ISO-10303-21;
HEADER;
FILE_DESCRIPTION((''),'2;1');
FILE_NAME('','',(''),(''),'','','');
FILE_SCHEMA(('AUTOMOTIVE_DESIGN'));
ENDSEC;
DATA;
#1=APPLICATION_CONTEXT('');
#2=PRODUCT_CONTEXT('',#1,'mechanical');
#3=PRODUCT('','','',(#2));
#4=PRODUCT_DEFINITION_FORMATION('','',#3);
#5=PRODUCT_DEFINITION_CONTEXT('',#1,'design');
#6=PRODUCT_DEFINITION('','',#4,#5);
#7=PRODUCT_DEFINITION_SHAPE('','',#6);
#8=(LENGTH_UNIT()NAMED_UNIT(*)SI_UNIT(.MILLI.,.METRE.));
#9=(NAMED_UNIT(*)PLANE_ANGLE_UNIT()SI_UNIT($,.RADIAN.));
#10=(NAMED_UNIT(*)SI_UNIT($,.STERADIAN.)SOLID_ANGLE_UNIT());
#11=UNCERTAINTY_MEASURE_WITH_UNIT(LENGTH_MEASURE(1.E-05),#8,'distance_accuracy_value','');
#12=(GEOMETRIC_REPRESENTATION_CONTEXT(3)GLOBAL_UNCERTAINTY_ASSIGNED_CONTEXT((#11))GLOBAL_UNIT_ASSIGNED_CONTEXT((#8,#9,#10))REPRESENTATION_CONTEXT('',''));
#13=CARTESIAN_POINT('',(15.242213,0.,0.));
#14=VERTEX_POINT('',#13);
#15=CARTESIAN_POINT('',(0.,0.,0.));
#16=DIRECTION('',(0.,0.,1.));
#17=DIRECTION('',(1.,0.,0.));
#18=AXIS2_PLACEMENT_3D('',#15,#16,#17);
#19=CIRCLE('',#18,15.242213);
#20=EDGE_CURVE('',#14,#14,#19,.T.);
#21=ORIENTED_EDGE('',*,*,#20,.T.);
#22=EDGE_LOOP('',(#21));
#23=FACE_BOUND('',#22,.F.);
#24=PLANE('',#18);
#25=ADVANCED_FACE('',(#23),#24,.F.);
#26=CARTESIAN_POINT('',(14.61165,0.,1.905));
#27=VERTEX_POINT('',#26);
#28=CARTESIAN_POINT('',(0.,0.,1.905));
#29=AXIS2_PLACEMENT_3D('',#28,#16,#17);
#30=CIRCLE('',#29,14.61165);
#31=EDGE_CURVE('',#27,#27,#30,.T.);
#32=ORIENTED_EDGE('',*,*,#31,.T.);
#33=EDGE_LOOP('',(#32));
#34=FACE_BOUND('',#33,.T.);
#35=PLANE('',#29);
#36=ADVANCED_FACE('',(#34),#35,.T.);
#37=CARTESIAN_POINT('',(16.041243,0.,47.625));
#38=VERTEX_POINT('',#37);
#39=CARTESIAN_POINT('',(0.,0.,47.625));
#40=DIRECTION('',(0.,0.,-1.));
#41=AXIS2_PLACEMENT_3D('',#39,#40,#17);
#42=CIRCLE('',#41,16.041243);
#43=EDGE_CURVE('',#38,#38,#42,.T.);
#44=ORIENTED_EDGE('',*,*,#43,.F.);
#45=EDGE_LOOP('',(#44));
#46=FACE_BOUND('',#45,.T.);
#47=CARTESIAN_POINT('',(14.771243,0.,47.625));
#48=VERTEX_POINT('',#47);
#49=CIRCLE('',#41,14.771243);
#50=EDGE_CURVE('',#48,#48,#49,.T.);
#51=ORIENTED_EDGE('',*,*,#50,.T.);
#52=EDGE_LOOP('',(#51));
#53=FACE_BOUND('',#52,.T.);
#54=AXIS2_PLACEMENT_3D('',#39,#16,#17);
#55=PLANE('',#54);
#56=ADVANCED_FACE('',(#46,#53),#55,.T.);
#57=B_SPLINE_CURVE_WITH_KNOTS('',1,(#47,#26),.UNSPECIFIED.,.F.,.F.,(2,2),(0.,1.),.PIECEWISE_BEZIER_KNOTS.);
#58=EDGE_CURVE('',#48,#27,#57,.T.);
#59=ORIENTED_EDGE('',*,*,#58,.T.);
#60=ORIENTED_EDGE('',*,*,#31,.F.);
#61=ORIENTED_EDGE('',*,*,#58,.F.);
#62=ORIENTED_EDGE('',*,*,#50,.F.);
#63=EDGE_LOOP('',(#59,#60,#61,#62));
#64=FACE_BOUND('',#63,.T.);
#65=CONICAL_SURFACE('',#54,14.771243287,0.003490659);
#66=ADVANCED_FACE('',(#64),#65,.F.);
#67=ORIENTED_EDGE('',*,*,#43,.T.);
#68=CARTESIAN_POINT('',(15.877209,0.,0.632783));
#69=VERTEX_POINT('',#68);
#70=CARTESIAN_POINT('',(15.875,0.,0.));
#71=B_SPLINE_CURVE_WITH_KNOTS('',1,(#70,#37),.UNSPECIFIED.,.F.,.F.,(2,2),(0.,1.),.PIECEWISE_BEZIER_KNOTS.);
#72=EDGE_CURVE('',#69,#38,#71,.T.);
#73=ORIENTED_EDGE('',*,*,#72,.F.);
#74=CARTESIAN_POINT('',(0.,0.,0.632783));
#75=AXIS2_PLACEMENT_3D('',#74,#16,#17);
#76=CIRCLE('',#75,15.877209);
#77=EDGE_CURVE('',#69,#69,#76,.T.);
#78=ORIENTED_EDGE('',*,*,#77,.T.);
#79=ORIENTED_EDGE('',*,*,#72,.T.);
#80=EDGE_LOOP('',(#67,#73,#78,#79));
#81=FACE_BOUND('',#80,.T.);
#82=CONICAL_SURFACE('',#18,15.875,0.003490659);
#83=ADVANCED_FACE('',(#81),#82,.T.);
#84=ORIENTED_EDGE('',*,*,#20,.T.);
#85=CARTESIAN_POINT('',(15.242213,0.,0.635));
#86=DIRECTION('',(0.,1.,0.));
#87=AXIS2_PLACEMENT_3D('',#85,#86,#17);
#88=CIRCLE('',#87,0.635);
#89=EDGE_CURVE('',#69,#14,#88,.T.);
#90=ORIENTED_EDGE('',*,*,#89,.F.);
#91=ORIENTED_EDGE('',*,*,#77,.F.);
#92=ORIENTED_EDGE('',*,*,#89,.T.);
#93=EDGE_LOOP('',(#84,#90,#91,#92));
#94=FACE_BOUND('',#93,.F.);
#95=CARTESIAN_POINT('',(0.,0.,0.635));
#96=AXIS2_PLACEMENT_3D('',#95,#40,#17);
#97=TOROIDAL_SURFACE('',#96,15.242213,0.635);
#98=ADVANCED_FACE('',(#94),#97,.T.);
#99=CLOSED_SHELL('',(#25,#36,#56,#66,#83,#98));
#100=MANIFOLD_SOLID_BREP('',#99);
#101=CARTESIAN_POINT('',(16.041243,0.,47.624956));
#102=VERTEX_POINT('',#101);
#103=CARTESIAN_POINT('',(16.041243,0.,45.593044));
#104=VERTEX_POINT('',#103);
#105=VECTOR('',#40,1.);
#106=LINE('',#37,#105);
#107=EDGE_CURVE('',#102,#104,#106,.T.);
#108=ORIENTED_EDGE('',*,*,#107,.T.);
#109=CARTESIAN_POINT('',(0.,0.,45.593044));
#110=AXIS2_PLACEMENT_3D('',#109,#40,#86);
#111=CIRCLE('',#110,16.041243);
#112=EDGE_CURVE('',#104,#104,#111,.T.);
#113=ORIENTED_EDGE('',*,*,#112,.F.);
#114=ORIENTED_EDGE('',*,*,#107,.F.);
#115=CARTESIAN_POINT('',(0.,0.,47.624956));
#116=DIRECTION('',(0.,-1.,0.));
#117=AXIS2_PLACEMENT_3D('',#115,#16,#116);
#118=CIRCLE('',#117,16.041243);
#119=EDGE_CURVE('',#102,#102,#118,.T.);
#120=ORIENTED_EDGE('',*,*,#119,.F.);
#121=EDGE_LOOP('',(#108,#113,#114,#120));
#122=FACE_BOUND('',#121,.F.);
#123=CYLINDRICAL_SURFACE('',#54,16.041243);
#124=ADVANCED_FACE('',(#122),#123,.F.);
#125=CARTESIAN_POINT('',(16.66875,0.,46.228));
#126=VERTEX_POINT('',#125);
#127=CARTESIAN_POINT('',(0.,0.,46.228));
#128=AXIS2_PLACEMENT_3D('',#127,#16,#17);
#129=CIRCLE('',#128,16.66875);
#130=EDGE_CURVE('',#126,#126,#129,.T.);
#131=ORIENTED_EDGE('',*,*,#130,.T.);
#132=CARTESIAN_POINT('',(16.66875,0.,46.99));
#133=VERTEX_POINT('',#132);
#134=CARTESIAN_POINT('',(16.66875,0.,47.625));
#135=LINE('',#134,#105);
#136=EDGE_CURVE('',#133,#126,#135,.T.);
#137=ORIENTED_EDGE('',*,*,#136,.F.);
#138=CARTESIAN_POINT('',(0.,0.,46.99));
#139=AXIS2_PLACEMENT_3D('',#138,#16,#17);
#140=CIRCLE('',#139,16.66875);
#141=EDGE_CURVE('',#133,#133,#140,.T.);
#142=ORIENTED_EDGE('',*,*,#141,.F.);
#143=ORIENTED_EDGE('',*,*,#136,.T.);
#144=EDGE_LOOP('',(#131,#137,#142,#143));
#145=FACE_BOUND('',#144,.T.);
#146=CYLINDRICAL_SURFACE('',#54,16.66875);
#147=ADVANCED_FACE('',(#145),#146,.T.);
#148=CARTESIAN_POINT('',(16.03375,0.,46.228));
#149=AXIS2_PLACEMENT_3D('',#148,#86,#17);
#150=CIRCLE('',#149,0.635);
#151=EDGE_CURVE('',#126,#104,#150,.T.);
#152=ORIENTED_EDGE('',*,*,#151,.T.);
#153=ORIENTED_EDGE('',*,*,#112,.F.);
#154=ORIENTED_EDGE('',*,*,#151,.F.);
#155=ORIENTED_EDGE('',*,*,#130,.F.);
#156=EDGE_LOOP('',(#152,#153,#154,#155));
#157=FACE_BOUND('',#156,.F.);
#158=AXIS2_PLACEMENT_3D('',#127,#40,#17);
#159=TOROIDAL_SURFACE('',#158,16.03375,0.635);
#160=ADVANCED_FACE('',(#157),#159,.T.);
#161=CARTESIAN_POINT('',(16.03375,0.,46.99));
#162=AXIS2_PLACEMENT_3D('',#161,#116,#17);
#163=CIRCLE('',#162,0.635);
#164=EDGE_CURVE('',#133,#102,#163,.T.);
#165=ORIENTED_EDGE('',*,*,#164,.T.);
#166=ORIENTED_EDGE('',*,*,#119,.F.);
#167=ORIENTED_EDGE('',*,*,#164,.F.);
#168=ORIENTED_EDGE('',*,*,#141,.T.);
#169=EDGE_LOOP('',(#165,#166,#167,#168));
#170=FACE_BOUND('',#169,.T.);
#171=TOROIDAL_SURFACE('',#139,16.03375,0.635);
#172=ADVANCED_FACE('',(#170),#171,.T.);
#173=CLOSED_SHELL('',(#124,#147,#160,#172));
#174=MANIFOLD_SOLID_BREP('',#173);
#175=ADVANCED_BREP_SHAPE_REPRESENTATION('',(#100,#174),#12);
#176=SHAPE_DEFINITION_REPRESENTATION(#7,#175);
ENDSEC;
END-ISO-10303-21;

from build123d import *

# Parameters (mm, degrees)
F0_R     = 15.875
F1_DEPTH = 47.625
F1_TAPER = -0.2
F2_R     = 14.7712432865
F3_DEPTH = 45.72
F3_TAPER = 0.2
F4_R     = 16.66875
F4_R_2   = 16.0412432865
F5_DEPTH = 2.032
F6_R     = 0.635


# Not quite as in the source:
# - a fillet or chamfer that OpenCascade refuses, or shapes differently, is made with other operations: its cross-section is extruded or revolved along the edge and cut away or added


with BuildPart() as f1:
    # F0 (on Top) → F1 (new body)
    with BuildSketch(Plane.XY):
        Circle(F0_R)
    extrude(amount=F1_DEPTH, taper=F1_TAPER)

    # F2 (on face) → F3 (cut)
    with BuildSketch(Plane.XY.offset(47.625)):
        Circle(F2_R)
    extrude(amount=-F3_DEPTH, taper=F3_TAPER, mode=Mode.SUBTRACT)

    # F6
    f6_edges = [f1.edges().sort_by_distance(p)[0] for p in [
        (-15.875, 0, 0),
    ]]
    fillet(f6_edges, radius=F6_R)


with BuildPart() as f5:
    # F4 (on face) → F5 (new body)
    with BuildSketch(Plane.XY.offset(47.625)):
        Circle(F4_R)
        Circle(F4_R_2, mode=Mode.SUBTRACT)
    extrude(amount=-F5_DEPTH)

    # F7: fillet of radius 0.635 on 1 edges, made by hand

    # F7_s1 → F7_t2 (revolve, cut)
    with BuildSketch(Plane.XZ):
        with BuildLine():
            ThreePointArc((16.66875, 46.228), (16.4827628061, 45.7789871939), (16.03375, 45.593))
            Line((16.03375, 45.593), (16.66875, 45.593))
            Line((16.66875, 45.593), (16.66875, 46.228))
        make_face()
    revolve(axis=Axis((0, 0, 45.593), (0, 0, 1)), mode=Mode.SUBTRACT)

    # F8: fillet of radius 0.635 on 1 edges, made by hand

    # F8_s1 → F8_t2 (revolve, cut)
    with BuildSketch(Plane.XZ):
        with BuildLine():
            ThreePointArc((16.66875, 46.99), (16.4827628061, 47.4390128061), (16.03375, 47.625))
            Line((16.03375, 47.625), (16.66875, 47.625))
            Line((16.66875, 47.625), (16.66875, 46.99))
        make_face()
    revolve(axis=Axis((0, 0, 47.625), (0, 0, 1)), mode=Mode.SUBTRACT)


solid = Compound([f1.part, f5.part])
